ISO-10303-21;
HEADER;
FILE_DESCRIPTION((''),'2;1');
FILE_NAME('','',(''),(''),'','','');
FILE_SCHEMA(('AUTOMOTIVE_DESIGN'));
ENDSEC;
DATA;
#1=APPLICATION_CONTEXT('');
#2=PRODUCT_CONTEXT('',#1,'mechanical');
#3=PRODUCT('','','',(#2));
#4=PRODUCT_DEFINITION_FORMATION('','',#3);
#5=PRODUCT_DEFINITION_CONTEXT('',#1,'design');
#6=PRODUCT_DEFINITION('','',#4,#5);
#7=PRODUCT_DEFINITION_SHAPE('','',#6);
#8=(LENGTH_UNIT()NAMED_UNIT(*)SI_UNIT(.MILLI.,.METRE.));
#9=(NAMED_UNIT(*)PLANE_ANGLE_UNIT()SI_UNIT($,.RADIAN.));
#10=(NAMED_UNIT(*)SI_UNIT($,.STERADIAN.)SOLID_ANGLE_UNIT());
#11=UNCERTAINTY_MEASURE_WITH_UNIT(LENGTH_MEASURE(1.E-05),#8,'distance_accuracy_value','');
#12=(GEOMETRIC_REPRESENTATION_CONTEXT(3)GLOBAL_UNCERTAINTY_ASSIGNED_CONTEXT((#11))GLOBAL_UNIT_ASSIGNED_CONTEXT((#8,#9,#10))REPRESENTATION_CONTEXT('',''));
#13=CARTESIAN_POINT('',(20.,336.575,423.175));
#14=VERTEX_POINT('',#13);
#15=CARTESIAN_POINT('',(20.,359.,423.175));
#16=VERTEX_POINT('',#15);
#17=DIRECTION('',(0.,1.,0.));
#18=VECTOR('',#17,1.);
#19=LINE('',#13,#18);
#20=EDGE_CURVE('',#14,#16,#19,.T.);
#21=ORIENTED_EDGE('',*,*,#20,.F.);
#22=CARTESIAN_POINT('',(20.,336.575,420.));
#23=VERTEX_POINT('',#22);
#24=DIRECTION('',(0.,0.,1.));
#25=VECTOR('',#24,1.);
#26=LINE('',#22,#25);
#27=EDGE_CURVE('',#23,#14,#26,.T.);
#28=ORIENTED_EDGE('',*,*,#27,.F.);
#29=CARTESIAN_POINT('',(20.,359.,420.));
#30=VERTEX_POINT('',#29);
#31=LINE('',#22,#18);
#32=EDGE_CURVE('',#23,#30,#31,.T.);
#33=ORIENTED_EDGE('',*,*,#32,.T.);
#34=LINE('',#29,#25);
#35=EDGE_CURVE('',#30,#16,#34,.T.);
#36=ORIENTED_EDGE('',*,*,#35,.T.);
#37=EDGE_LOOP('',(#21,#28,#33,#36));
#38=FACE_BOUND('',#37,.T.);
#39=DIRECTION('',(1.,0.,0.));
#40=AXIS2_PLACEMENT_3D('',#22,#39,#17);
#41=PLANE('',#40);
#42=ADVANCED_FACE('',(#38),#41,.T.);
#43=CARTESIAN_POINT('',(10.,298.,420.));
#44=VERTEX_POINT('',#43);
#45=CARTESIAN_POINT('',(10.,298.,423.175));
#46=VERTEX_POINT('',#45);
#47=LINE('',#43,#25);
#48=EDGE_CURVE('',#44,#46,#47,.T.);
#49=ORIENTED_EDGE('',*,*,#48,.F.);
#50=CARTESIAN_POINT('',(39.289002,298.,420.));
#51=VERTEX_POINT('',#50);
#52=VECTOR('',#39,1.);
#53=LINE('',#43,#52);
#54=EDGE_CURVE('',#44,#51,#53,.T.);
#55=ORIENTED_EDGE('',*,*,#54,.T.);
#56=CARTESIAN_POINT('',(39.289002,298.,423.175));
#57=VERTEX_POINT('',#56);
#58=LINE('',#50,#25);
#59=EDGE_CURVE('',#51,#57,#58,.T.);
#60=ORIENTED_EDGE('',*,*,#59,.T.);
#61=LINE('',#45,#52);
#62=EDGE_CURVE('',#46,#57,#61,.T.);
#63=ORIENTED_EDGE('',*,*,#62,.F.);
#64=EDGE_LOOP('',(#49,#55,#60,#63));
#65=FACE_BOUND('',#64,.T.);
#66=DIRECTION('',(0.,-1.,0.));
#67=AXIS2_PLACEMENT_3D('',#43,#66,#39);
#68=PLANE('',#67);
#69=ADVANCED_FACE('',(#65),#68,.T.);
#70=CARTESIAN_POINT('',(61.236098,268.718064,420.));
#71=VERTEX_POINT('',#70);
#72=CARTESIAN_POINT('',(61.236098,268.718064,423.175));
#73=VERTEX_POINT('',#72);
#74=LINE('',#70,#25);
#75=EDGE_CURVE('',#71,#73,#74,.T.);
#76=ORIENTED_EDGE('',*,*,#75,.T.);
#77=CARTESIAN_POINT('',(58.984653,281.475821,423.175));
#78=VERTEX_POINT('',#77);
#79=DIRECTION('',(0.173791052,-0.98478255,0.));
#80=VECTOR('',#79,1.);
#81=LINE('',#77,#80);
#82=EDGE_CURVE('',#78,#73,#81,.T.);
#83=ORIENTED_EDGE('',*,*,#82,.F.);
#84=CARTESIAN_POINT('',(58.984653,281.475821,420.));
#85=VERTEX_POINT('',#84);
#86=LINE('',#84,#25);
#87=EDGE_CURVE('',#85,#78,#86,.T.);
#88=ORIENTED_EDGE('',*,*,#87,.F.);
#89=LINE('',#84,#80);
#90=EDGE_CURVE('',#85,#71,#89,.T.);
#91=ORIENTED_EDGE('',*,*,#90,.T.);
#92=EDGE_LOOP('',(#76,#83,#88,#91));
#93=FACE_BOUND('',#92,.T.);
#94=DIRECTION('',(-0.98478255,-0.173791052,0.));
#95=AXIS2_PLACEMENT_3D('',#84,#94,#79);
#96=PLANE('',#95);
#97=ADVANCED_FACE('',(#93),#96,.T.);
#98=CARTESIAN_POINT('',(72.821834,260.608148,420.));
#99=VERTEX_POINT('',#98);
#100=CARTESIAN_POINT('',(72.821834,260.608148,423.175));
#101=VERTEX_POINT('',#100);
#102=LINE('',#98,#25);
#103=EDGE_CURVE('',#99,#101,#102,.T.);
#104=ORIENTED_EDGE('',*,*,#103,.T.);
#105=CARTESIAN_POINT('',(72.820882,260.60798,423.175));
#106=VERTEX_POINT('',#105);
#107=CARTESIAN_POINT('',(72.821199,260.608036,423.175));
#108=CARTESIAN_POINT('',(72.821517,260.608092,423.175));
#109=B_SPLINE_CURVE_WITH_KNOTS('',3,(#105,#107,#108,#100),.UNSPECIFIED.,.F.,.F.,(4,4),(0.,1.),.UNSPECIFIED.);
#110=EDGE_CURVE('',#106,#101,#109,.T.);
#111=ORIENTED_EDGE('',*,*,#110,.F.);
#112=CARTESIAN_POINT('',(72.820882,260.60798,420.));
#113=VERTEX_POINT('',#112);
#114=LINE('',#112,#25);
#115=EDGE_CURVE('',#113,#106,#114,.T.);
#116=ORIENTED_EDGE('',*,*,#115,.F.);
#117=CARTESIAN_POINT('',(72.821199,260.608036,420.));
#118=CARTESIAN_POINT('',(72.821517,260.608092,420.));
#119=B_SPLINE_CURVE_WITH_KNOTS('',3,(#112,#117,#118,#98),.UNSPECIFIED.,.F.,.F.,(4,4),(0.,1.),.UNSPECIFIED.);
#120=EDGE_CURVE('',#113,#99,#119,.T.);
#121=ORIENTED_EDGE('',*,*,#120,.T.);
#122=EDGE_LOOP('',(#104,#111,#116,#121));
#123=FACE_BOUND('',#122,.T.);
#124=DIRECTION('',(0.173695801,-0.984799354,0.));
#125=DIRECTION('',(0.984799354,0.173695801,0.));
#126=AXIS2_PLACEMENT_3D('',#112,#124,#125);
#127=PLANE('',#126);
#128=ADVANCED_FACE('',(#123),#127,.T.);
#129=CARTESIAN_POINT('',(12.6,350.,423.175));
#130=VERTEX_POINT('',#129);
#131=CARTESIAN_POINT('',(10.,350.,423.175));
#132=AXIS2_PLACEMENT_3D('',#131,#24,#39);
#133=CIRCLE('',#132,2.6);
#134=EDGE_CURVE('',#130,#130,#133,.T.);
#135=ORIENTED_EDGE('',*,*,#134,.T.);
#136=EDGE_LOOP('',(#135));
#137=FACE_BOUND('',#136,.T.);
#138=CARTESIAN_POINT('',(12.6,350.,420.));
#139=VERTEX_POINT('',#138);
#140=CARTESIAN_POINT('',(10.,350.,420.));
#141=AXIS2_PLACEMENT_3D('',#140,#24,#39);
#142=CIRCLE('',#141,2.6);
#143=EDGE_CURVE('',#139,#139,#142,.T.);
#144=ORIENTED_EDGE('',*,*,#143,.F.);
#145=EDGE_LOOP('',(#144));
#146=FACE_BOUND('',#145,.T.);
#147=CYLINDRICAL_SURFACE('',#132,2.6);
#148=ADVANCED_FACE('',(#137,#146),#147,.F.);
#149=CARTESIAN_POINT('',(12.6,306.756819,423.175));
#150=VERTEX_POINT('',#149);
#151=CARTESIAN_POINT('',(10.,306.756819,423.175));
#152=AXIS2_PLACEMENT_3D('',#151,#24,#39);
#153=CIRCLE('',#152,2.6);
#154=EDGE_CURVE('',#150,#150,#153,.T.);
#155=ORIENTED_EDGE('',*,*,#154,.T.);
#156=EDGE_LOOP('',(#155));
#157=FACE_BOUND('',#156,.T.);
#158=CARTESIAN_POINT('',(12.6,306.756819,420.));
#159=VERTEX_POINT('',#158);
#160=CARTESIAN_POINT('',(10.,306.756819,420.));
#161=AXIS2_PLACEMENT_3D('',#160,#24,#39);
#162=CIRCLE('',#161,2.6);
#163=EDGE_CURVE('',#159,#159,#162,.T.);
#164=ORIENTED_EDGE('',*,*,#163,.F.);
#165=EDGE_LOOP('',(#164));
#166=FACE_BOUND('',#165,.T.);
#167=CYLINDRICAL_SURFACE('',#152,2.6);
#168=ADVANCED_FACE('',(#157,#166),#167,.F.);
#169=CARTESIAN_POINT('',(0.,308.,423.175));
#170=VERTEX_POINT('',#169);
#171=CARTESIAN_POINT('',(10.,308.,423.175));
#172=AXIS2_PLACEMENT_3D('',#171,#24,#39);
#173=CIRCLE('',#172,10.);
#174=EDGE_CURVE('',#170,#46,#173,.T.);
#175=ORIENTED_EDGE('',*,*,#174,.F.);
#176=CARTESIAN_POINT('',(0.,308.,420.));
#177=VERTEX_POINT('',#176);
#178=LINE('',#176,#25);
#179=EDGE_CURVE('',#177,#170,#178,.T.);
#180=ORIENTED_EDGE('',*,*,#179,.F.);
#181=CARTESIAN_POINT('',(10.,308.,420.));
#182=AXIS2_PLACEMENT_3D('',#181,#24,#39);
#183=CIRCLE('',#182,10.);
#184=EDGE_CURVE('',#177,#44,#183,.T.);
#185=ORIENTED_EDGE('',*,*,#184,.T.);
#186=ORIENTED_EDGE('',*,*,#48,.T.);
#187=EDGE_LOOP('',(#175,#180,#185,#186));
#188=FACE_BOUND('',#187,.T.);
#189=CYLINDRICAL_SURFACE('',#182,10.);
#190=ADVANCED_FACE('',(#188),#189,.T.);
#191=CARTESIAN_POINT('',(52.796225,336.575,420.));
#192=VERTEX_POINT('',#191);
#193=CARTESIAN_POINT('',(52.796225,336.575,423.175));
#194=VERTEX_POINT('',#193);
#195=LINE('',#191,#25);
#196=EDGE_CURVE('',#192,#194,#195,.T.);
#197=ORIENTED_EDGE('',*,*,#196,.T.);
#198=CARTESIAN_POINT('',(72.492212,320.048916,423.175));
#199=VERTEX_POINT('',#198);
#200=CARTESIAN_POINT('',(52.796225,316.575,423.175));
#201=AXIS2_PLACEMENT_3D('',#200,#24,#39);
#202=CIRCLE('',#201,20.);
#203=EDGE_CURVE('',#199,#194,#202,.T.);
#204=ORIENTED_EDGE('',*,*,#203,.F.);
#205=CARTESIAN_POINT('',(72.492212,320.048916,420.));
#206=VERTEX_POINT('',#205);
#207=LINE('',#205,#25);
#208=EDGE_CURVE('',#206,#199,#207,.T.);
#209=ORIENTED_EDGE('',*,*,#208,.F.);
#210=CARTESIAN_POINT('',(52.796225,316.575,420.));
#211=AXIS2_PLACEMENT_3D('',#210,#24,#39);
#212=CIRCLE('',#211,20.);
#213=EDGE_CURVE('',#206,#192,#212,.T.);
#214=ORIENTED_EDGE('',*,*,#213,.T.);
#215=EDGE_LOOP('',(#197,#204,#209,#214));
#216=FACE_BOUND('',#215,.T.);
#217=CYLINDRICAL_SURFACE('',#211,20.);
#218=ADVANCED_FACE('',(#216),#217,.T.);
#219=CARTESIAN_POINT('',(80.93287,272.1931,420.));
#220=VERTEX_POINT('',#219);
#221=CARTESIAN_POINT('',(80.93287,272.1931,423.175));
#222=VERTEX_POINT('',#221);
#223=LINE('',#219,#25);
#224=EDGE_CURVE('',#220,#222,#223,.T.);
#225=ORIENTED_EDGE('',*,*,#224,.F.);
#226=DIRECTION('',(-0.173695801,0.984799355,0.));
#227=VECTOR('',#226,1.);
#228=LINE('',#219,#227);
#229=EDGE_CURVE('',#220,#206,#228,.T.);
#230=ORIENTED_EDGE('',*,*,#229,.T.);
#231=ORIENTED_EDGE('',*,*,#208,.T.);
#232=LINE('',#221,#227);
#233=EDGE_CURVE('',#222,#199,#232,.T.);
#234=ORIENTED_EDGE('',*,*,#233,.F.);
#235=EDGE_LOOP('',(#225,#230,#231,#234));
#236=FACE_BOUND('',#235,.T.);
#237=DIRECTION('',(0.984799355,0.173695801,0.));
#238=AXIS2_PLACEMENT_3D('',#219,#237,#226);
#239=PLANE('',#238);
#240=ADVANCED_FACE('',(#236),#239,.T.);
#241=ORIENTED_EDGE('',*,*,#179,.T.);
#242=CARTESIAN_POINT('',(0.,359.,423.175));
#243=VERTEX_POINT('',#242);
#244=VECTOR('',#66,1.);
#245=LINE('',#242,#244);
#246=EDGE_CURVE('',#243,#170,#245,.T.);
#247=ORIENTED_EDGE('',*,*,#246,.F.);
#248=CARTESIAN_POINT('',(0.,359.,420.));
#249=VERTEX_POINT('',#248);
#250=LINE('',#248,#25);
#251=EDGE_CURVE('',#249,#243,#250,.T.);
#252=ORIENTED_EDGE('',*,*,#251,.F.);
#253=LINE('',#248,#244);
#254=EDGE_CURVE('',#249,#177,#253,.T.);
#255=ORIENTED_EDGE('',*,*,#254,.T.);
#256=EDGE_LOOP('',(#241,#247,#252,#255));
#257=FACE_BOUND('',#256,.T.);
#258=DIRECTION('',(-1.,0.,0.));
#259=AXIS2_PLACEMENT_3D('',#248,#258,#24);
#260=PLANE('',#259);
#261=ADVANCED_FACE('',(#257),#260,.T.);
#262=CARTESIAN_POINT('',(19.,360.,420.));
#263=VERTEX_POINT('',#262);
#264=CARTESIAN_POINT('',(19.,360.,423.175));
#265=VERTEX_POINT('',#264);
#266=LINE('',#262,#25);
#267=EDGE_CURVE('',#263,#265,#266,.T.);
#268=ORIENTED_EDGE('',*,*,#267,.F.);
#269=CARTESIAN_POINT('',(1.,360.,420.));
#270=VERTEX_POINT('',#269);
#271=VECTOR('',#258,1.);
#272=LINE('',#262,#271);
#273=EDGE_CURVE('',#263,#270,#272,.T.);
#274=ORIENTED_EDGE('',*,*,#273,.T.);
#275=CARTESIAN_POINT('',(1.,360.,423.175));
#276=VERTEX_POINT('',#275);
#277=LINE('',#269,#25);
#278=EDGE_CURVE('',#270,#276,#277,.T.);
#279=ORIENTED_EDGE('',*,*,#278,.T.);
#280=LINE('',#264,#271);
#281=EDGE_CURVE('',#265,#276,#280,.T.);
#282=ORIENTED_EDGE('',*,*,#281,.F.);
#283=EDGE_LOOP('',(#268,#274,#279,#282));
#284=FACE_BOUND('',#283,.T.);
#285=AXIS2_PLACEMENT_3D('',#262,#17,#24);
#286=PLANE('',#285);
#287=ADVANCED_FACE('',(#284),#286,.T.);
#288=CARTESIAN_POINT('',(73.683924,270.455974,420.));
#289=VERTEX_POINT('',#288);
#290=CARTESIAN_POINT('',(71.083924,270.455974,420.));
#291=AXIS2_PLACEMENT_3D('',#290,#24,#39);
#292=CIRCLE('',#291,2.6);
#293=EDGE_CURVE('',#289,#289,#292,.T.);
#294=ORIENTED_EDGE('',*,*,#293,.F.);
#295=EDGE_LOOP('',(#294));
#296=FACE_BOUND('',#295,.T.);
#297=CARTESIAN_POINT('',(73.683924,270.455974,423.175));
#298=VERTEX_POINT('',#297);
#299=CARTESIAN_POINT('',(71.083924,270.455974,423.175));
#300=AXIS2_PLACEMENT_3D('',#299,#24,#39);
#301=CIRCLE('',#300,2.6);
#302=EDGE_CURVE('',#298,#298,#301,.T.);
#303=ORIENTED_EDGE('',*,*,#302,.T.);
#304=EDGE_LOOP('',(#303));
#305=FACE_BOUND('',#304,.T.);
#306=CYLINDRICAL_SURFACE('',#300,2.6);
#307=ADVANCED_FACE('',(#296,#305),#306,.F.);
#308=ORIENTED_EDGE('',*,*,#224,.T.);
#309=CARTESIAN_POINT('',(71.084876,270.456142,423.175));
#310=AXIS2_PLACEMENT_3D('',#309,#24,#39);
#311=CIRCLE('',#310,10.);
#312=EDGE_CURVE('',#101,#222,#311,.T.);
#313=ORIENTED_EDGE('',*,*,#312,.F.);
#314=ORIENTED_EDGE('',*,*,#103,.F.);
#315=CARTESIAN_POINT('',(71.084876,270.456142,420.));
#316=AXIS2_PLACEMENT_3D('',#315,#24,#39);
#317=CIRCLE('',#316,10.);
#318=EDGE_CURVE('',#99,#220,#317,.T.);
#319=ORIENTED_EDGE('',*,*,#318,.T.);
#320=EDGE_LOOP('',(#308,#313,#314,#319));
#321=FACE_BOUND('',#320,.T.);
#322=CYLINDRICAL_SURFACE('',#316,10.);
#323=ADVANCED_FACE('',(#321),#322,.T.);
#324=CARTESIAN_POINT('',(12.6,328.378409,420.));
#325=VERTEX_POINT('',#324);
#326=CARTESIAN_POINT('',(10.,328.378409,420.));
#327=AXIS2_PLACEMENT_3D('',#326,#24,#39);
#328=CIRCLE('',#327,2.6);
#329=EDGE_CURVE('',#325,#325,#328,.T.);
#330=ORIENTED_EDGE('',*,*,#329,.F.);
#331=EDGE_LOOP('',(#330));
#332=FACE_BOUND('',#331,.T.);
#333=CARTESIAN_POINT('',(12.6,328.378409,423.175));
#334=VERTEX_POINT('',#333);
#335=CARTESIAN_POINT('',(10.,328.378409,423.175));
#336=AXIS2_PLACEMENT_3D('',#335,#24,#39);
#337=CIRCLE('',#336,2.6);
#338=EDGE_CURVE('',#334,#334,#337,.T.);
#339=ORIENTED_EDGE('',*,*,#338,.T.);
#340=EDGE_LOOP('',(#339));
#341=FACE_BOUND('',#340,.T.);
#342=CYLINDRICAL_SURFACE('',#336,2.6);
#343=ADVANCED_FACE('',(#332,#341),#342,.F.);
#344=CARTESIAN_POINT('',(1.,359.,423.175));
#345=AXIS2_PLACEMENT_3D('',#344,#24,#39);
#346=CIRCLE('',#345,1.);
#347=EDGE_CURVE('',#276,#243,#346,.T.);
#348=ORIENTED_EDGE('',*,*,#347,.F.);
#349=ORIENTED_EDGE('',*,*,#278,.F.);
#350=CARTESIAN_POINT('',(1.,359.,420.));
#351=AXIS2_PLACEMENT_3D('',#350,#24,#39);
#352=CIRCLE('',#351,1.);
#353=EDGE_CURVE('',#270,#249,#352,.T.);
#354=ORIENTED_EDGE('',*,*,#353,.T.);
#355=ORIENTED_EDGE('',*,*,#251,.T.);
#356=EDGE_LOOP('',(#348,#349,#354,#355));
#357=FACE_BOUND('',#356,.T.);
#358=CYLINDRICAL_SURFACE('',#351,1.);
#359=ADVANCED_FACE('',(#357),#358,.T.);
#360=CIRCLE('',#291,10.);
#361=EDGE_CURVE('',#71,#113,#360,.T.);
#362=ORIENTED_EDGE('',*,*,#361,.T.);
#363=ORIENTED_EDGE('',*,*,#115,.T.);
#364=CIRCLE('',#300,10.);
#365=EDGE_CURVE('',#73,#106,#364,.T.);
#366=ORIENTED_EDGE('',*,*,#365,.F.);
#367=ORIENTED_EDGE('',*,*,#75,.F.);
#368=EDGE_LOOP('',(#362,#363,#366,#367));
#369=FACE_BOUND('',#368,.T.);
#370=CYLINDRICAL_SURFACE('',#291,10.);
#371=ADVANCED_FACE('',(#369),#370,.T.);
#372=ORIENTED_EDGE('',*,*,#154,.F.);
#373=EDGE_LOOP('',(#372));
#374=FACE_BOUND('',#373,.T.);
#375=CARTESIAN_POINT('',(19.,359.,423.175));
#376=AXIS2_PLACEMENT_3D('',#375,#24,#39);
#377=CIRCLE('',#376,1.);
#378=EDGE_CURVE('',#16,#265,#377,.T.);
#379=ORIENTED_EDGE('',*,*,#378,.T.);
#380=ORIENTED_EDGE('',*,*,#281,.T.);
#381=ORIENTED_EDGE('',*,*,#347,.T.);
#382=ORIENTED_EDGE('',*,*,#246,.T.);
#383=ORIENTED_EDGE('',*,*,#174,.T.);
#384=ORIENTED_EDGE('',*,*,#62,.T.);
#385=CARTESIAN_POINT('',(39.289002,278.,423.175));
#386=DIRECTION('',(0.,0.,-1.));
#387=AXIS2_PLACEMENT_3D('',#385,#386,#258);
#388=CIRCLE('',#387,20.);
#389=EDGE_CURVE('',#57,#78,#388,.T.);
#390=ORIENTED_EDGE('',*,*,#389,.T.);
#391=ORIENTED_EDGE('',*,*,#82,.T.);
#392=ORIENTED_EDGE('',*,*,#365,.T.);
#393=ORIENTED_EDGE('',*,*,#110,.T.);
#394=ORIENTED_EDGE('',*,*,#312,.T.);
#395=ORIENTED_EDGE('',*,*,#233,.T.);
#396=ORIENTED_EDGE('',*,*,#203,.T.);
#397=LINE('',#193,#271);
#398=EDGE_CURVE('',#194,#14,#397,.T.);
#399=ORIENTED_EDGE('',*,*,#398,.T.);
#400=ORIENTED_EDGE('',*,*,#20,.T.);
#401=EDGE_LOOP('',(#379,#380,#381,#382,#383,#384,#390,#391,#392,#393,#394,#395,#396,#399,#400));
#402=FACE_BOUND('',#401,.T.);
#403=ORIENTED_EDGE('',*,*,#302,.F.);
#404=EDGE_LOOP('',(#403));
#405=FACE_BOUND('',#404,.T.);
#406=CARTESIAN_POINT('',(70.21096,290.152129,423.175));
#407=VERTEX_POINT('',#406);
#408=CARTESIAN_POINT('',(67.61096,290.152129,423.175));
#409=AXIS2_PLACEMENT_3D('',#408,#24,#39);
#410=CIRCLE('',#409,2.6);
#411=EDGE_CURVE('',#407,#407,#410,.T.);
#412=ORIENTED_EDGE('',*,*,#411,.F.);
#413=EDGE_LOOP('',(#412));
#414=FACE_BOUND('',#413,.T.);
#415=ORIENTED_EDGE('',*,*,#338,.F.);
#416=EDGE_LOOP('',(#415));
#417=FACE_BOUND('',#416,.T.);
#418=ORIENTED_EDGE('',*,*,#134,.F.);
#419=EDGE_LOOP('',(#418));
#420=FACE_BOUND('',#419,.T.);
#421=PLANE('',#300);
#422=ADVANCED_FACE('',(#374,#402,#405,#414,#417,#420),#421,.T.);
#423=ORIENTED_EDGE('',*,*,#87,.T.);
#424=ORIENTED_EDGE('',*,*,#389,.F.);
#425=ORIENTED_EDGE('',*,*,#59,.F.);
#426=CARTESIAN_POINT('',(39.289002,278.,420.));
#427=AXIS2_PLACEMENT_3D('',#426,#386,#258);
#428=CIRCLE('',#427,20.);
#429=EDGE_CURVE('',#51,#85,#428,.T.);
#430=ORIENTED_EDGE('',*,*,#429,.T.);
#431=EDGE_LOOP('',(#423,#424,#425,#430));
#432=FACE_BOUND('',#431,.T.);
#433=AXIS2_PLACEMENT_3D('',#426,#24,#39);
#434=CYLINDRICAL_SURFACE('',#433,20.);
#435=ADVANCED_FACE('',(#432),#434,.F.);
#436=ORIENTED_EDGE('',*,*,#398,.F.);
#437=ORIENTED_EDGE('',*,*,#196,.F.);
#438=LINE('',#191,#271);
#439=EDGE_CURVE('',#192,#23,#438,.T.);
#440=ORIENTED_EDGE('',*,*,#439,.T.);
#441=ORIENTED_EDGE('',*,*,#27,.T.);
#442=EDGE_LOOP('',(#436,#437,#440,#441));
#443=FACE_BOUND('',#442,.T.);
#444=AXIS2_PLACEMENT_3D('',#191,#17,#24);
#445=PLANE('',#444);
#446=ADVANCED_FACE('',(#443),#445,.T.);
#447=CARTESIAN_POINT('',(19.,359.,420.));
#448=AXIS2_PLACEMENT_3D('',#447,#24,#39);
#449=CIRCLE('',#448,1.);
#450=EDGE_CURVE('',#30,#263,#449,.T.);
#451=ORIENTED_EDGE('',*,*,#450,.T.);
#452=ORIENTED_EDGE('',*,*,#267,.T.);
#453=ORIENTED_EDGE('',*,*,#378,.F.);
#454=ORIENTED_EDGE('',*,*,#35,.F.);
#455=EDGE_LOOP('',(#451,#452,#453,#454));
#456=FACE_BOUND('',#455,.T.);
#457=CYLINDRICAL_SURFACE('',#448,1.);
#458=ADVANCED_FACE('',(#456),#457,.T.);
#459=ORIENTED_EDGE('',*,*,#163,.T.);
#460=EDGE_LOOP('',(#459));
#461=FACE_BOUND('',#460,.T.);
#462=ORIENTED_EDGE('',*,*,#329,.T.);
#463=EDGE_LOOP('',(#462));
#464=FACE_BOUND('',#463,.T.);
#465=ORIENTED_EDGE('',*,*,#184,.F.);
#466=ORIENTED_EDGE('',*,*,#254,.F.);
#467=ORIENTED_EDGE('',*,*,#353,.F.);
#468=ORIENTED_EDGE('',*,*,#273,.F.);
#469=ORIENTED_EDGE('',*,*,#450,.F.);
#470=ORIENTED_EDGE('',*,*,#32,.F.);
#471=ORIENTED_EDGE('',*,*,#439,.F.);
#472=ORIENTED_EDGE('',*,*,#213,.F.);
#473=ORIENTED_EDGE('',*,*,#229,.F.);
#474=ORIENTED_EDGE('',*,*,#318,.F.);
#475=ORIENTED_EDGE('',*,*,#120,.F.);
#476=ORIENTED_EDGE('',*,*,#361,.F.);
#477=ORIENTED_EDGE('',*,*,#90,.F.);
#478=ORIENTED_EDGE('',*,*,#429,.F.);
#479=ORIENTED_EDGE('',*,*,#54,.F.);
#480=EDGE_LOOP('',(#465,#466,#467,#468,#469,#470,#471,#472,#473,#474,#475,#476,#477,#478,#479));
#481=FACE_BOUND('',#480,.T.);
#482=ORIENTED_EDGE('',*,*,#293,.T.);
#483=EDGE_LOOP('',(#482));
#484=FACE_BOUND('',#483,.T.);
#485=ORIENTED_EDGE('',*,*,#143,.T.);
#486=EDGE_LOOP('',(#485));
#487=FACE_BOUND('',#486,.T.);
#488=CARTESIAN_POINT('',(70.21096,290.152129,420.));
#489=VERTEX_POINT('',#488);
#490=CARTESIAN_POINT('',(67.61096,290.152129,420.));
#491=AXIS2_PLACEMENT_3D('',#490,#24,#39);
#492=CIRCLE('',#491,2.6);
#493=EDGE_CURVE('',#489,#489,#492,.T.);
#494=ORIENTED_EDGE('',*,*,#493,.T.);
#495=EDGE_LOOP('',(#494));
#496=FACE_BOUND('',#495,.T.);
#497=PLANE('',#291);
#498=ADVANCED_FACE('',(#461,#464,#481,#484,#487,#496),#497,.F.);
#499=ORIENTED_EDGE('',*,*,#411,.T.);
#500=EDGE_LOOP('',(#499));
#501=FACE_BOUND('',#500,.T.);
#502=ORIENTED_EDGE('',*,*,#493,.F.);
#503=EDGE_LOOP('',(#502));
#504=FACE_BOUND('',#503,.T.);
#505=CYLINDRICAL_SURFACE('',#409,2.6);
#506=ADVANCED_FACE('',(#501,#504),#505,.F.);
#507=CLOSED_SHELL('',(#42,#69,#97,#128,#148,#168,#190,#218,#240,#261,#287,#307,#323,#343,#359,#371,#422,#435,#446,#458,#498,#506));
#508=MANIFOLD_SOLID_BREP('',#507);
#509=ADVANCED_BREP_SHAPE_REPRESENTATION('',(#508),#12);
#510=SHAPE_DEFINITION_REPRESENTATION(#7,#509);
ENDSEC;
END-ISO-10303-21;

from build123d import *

# Parameters (mm, degrees)
BASE_FLANGE1_DEPTH         = 3.175
F_5_2_5_2_DIAMETER_HOLE1_D = 5.2


# Sheet-metal steps are written as plain solids
with BuildPart() as part:
    # Sketch11 → Base-Flange1 (new body)
    with BuildSketch(Plane.XY.offset(423.175)):
        with BuildLine():
            Line((80.932869831, 272.193100025), (72.492212082, 320.048916024))
            ThreePointArc((72.492212082, 320.048916024), (65.651606735, 331.8961997), (52.796224992, 336.575))
            Line((52.796224992, 336.575), (20, 336.575))
            Line((20, 336.575), (20, 359))
            ThreePointArc((20, 359), (19.707106781, 359.707106781), (19, 360))
            Line((19, 360), (1, 360))
            ThreePointArc((1, 360), (0.292893219, 359.707106781), (0, 359))
            Line((0, 359), (0, 308))
            ThreePointArc((0, 308), (2.928932188, 300.928932188), (10, 298))
            Line((10, 298), (39.289001969, 298))
            ThreePointArc((39.289001969, 298), (52.143642752, 293.321821378), (58.984652965, 281.475821034))
            Line((58.984652965, 281.475821034), (61.236098321, 268.718063502))
            ThreePointArc((61.236098321, 268.718063502), (65.348951759, 262.263898856), (72.820881831, 260.607980474))
            ThreePointArc((72.820881831, 260.607980474), (79.276674092, 264.720773785), (80.932869831, 272.193100025))
        make_face()
    extrude(amount=-BASE_FLANGE1_DEPTH)

    # Ø5.2 (5.2) Diameter Hole1 (through all)
    with Locations(Plane.XY.offset(423.175)):
        with Locations((67.610960265, 290.15212908), (10, 349.9999998), (10, 328.3784093), (10, 306.7568188), (71.083923819, 270.455974019)):
            Hole(F_5_2_5_2_DIAMETER_HOLE1_D / 2)


solid = part.part
